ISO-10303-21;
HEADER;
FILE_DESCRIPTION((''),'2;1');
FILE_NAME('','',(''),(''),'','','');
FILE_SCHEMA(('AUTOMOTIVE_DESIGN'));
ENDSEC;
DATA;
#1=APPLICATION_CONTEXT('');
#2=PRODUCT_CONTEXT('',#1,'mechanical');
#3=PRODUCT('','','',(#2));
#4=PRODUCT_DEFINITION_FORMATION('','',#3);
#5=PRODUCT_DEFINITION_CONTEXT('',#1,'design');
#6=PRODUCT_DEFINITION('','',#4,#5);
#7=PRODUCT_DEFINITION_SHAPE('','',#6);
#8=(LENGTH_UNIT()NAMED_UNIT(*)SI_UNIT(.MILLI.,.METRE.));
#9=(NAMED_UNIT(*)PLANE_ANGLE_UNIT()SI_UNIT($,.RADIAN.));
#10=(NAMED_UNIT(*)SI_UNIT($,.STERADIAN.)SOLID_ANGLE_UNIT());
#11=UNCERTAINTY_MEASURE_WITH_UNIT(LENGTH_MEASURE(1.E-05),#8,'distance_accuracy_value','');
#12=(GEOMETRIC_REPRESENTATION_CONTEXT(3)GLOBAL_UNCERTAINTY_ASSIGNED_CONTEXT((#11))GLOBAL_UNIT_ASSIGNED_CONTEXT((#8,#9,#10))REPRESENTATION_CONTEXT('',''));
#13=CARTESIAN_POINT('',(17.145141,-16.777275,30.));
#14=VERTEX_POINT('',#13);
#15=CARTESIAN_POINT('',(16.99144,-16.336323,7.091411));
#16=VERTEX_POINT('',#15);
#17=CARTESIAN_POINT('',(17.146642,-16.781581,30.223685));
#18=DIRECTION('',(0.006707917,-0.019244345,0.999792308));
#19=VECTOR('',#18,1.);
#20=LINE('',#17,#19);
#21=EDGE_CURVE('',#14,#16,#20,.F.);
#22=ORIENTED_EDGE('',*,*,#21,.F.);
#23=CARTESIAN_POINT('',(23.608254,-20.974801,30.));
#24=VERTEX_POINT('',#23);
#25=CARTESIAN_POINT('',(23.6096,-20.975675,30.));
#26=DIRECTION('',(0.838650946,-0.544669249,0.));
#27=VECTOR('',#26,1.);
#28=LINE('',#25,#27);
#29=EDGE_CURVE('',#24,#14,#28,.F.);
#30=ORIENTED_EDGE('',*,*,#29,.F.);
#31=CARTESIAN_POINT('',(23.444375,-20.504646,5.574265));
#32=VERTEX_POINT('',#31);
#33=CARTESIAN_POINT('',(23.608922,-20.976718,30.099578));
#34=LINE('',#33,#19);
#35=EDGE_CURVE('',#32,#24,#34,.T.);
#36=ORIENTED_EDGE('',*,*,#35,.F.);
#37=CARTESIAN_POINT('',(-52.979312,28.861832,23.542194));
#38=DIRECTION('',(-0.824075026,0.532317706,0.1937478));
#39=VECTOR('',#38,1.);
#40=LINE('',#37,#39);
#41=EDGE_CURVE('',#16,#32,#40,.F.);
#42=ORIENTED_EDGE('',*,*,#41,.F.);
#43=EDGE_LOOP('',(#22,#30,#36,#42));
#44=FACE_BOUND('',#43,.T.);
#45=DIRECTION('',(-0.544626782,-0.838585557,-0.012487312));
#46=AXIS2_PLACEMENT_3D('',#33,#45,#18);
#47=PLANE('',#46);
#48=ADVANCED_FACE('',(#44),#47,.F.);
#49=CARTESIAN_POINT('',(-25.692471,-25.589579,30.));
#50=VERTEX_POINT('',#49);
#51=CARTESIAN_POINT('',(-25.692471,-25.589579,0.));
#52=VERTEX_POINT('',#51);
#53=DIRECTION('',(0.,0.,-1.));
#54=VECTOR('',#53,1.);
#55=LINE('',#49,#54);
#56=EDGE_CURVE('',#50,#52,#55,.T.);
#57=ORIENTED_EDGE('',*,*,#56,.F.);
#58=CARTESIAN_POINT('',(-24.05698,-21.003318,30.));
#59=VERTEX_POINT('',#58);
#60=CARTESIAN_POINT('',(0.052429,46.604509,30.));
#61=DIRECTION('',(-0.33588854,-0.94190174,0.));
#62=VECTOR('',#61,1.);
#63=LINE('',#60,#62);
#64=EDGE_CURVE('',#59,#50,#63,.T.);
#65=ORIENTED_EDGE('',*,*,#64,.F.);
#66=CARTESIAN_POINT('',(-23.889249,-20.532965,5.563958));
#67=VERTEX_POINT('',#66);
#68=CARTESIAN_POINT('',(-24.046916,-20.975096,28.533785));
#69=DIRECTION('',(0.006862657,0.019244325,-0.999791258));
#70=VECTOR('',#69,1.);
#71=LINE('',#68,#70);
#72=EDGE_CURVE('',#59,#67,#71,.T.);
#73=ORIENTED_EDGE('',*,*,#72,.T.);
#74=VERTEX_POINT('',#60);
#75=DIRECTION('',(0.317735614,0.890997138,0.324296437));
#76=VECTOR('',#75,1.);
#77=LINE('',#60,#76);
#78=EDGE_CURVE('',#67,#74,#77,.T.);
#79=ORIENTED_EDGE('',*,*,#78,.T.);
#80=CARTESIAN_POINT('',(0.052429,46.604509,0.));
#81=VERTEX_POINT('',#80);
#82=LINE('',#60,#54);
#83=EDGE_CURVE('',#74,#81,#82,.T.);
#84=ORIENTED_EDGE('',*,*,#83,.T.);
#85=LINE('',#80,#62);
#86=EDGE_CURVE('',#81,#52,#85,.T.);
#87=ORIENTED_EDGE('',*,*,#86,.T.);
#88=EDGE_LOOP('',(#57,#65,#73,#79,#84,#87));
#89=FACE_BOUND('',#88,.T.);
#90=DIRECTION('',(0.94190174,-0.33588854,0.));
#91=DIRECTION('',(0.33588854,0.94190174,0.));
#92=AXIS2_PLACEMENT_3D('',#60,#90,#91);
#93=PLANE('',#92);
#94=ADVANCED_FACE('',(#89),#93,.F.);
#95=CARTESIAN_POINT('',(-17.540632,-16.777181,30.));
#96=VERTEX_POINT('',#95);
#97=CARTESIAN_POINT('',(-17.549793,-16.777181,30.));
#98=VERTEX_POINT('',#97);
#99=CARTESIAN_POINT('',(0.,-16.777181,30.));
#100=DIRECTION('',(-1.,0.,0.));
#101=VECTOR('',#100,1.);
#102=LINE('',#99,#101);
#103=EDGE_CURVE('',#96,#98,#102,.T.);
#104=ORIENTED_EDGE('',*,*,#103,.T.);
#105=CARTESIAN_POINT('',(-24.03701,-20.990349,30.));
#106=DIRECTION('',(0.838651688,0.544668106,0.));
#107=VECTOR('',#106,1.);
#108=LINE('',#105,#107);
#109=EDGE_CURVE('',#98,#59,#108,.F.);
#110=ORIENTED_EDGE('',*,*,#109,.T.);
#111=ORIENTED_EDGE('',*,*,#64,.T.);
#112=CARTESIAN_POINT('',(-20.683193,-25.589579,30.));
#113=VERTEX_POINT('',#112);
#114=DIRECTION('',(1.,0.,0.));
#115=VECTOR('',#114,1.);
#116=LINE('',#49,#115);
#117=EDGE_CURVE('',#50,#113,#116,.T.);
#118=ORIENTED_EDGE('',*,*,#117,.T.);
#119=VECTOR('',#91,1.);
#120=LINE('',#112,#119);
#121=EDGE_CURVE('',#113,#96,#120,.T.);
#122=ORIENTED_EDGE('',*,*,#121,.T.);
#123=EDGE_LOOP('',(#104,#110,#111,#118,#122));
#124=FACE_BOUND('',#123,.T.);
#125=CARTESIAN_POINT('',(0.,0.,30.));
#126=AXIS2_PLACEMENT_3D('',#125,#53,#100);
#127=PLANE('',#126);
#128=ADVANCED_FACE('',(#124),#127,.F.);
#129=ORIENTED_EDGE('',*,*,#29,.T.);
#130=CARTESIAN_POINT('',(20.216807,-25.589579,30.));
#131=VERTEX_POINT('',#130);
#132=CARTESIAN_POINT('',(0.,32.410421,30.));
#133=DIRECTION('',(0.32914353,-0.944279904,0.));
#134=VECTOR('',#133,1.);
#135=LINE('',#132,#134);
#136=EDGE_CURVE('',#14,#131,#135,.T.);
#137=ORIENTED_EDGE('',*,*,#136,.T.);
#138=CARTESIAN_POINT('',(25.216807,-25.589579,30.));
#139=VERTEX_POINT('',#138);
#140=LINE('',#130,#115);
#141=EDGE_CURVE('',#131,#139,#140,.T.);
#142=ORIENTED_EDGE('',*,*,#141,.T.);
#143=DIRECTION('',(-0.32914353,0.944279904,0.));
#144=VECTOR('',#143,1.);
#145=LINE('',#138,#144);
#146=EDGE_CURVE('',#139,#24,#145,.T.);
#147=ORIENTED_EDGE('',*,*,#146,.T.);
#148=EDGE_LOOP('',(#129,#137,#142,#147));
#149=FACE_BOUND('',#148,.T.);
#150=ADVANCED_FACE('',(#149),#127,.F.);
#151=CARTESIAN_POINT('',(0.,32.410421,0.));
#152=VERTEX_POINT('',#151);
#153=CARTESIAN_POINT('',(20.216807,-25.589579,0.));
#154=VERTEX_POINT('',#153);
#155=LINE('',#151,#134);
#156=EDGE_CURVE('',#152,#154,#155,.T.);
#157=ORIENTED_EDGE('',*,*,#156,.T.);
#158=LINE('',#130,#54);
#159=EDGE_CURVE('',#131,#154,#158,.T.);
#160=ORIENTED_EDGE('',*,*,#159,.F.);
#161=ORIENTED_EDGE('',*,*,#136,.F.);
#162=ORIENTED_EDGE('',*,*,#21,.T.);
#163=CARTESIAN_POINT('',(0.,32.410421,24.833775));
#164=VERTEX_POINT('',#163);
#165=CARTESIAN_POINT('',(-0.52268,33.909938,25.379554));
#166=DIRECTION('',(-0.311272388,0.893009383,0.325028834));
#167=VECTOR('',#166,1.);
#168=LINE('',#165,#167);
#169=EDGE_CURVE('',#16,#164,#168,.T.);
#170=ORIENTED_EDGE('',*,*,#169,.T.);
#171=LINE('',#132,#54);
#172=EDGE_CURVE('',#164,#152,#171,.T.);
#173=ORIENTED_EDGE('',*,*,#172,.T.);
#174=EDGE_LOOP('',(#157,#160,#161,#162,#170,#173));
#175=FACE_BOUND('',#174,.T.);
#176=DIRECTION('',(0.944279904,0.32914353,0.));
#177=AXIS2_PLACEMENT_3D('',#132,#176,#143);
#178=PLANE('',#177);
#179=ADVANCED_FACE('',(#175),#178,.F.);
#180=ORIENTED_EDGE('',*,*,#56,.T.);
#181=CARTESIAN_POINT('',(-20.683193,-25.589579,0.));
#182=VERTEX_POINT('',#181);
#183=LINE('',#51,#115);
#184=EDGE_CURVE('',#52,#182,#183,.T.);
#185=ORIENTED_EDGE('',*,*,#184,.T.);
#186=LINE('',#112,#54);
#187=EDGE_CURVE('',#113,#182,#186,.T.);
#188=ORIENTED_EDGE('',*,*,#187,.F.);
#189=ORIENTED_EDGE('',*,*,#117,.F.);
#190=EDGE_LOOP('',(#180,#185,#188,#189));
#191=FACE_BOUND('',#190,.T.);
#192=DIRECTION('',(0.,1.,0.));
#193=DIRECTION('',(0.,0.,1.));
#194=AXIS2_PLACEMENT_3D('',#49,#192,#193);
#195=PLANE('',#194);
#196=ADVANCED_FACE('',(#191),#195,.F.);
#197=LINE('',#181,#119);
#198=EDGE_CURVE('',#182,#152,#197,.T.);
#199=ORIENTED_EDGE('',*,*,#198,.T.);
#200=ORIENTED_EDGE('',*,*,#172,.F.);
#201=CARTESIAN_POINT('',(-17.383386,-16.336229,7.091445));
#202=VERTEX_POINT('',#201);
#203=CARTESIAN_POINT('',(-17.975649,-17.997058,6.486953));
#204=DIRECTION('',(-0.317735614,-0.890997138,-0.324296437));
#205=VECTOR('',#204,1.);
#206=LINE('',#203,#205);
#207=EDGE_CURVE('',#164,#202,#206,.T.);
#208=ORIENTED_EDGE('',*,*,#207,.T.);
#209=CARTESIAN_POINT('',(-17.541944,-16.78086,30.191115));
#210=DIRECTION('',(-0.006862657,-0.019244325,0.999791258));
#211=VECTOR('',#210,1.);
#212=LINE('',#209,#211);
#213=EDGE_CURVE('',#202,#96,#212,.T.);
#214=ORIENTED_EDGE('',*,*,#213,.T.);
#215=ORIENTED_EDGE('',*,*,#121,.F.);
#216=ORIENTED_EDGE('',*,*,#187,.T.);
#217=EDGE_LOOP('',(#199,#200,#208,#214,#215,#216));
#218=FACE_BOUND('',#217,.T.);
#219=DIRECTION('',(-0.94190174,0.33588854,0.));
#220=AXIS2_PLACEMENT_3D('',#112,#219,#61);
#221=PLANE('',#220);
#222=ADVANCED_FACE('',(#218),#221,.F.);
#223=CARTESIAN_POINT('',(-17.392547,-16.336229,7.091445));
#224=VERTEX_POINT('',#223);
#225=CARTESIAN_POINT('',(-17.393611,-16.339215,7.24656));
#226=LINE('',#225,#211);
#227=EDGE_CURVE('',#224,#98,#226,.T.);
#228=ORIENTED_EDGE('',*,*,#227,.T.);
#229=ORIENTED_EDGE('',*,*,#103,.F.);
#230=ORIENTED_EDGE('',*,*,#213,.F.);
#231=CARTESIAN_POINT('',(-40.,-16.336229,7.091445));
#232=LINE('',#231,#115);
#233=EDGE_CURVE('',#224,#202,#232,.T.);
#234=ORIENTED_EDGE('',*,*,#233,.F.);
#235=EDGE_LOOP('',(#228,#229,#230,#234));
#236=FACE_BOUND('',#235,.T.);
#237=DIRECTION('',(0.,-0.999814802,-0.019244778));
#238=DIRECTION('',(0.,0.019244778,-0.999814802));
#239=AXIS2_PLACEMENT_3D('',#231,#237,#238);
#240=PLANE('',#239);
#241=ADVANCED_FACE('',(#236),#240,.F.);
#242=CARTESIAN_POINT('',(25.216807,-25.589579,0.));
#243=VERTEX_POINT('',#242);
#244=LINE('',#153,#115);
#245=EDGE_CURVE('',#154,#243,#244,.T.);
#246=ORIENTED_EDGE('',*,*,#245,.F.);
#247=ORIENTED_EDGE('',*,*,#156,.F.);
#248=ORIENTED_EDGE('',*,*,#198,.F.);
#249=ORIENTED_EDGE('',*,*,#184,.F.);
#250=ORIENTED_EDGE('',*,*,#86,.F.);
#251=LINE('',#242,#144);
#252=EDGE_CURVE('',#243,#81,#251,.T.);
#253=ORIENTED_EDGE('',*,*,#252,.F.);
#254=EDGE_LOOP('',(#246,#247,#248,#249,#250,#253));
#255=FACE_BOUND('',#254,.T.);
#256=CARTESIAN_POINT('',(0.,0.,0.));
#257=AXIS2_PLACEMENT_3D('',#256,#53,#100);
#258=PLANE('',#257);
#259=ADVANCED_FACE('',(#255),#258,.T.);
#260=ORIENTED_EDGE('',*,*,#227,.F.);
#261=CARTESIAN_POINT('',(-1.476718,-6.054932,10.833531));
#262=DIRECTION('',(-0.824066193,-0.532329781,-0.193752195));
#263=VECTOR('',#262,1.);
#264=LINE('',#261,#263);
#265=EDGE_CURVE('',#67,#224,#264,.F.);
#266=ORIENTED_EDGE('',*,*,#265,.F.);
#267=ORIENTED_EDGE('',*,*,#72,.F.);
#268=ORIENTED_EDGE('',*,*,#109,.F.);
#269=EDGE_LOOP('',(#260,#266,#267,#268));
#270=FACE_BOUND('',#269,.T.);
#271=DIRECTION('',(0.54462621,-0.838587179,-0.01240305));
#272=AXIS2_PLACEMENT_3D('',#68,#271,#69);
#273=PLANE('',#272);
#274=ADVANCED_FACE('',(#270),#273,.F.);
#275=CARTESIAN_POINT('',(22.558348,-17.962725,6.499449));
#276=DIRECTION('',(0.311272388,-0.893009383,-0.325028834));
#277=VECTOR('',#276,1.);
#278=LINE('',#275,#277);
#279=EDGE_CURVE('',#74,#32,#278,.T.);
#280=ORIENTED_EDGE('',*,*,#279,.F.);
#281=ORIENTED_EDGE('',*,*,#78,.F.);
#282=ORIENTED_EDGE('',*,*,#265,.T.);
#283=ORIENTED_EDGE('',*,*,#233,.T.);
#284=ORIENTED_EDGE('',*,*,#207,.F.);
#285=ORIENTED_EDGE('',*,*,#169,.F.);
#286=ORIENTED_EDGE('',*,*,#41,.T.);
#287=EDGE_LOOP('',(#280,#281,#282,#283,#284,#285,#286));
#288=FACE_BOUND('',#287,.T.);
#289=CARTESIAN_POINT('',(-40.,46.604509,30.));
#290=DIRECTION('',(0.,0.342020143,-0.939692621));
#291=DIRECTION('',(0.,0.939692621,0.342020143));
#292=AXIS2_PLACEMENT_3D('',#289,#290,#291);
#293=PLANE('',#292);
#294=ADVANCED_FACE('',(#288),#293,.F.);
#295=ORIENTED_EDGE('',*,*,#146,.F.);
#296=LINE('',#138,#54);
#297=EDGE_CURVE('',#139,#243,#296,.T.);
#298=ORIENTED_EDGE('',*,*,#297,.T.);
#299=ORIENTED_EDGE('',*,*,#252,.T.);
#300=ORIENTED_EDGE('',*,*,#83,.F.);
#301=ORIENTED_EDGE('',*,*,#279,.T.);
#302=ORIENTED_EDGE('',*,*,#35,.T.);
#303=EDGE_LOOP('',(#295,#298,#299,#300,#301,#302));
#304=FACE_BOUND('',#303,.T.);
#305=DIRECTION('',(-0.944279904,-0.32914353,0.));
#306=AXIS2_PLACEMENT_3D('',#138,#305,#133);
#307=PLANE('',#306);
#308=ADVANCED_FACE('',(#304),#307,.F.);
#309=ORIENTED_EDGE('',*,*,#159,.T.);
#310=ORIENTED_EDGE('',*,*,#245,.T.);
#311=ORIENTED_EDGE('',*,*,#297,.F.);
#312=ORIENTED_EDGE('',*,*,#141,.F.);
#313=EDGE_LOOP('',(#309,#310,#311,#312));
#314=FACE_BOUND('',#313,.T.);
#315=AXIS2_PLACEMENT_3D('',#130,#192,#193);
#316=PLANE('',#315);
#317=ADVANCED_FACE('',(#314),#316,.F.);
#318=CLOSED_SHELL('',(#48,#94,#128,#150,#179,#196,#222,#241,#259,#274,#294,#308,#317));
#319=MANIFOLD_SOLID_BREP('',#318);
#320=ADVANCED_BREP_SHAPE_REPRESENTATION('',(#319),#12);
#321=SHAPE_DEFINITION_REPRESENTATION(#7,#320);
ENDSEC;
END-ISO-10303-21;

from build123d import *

# Parameters (mm, degrees)
BOSS_EXTRU_1_DEPTH      = 30
ENL_V_MAT_EXTRU_1_DEPTH = 40
CHANFREIN1_SIZE         = 5
CHANFREIN1_SIZE_2       = 4.485876758
CHANFREIN1_SIZE_3       = 4.444390394


with BuildPart() as part:
    # Esquisse1 → Boss.-Extru.1 (new body)
    with BuildSketch(Plane.XY):
        Polygon((-20.683192831, -25.589578536), (0, 32.410421464), (20.216807169, -25.589578536), (25.216807169, -25.589578536), (0.052428935, 46.604508561), (-25.692471491, -25.589578536), align=None)
    extrude(amount=BOSS_EXTRU_1_DEPTH)

    # Esquisse2 → Enlèv. mat.-Extru.1 (cut, symmetric)
    with BuildSketch(Plane(origin=(0, 0, 0), x_dir=(0, 0, -1), z_dir=(1, 0, 0))):
        Polygon((-30, 46.604508561), (-7.091444924, -16.336229224), (-30, -16.777180943), align=None)
    extrude(amount=ENL_V_MAT_EXTRU_1_DEPTH, both=True, mode=Mode.SUBTRACT)

    # Chanfrein1
    # the kernel refuses this chamfer: 5, 4.485876758, 4.444390394 mm, written as the material it takes off along each edge
    with BuildSketch(Plane(origin=(-22.303983799, -16.087550115, -5.828062673), x_dir=(0.9997543804703944, 0.020937821677919046, 0.0072654217800036), z_dir=(-0.00686265654519205, -0.019244324745599332, 0.9997912581685382))) as chanfrein1_piece_1_section:
        Polygon((CHANFREIN1_SIZE * 0.999777923546, -CHANFREIN1_SIZE * 0.0210737654663), (-CHANFREIN1_SIZE_2 * 0.35560163891, -CHANFREIN1_SIZE_2 * 0.934637616571), (0, 0), align=None)
    chanfrein1_piece_1 = extrude(amount=48.757748051, mode=Mode.PRIVATE)
    chanfrein1_piece_1 = split(chanfrein1_piece_1, bisect_by=Plane(origin=(-21.319692557, -14.185364149, 7.874295789), z_dir=(0, -0.3420201433256631, 0.9396926207859105)), keep=Keep.TOP, mode=Mode.PRIVATE)
    add(chanfrein1_piece_1, mode=Mode.SUBTRACT)
    with BuildSketch(Plane(origin=(22.231789239, -17.025860313, 42.919521162), x_dir=(0.35409216493463397, -0.9349886052835225, -0.0203726954985718), z_dir=(-0.006707917430774409, 0.01924434495210566, -0.9997923079475588))) as chanfrein1_piece_2_section:
        Polygon((CHANFREIN1_SIZE_3 * 0.999645713908, CHANFREIN1_SIZE_3 * 0.0266166655786), (-CHANFREIN1_SIZE * 0.354100131597, CHANFREIN1_SIZE * 0.935207515369), (0, 0), align=None)
    chanfrein1_piece_2 = extrude(amount=48.757723993, mode=Mode.PRIVATE)
    chanfrein1_piece_2 = split(chanfrein1_piece_2, bisect_by=Plane(origin=(20.901821142, -14.176256403, 7.877610737), z_dir=(0, -0.3420201433256631, 0.9396926207859105)), keep=Keep.TOP, mode=Mode.PRIVATE)
    add(chanfrein1_piece_2, mode=Mode.SUBTRACT)


solid = part.part
